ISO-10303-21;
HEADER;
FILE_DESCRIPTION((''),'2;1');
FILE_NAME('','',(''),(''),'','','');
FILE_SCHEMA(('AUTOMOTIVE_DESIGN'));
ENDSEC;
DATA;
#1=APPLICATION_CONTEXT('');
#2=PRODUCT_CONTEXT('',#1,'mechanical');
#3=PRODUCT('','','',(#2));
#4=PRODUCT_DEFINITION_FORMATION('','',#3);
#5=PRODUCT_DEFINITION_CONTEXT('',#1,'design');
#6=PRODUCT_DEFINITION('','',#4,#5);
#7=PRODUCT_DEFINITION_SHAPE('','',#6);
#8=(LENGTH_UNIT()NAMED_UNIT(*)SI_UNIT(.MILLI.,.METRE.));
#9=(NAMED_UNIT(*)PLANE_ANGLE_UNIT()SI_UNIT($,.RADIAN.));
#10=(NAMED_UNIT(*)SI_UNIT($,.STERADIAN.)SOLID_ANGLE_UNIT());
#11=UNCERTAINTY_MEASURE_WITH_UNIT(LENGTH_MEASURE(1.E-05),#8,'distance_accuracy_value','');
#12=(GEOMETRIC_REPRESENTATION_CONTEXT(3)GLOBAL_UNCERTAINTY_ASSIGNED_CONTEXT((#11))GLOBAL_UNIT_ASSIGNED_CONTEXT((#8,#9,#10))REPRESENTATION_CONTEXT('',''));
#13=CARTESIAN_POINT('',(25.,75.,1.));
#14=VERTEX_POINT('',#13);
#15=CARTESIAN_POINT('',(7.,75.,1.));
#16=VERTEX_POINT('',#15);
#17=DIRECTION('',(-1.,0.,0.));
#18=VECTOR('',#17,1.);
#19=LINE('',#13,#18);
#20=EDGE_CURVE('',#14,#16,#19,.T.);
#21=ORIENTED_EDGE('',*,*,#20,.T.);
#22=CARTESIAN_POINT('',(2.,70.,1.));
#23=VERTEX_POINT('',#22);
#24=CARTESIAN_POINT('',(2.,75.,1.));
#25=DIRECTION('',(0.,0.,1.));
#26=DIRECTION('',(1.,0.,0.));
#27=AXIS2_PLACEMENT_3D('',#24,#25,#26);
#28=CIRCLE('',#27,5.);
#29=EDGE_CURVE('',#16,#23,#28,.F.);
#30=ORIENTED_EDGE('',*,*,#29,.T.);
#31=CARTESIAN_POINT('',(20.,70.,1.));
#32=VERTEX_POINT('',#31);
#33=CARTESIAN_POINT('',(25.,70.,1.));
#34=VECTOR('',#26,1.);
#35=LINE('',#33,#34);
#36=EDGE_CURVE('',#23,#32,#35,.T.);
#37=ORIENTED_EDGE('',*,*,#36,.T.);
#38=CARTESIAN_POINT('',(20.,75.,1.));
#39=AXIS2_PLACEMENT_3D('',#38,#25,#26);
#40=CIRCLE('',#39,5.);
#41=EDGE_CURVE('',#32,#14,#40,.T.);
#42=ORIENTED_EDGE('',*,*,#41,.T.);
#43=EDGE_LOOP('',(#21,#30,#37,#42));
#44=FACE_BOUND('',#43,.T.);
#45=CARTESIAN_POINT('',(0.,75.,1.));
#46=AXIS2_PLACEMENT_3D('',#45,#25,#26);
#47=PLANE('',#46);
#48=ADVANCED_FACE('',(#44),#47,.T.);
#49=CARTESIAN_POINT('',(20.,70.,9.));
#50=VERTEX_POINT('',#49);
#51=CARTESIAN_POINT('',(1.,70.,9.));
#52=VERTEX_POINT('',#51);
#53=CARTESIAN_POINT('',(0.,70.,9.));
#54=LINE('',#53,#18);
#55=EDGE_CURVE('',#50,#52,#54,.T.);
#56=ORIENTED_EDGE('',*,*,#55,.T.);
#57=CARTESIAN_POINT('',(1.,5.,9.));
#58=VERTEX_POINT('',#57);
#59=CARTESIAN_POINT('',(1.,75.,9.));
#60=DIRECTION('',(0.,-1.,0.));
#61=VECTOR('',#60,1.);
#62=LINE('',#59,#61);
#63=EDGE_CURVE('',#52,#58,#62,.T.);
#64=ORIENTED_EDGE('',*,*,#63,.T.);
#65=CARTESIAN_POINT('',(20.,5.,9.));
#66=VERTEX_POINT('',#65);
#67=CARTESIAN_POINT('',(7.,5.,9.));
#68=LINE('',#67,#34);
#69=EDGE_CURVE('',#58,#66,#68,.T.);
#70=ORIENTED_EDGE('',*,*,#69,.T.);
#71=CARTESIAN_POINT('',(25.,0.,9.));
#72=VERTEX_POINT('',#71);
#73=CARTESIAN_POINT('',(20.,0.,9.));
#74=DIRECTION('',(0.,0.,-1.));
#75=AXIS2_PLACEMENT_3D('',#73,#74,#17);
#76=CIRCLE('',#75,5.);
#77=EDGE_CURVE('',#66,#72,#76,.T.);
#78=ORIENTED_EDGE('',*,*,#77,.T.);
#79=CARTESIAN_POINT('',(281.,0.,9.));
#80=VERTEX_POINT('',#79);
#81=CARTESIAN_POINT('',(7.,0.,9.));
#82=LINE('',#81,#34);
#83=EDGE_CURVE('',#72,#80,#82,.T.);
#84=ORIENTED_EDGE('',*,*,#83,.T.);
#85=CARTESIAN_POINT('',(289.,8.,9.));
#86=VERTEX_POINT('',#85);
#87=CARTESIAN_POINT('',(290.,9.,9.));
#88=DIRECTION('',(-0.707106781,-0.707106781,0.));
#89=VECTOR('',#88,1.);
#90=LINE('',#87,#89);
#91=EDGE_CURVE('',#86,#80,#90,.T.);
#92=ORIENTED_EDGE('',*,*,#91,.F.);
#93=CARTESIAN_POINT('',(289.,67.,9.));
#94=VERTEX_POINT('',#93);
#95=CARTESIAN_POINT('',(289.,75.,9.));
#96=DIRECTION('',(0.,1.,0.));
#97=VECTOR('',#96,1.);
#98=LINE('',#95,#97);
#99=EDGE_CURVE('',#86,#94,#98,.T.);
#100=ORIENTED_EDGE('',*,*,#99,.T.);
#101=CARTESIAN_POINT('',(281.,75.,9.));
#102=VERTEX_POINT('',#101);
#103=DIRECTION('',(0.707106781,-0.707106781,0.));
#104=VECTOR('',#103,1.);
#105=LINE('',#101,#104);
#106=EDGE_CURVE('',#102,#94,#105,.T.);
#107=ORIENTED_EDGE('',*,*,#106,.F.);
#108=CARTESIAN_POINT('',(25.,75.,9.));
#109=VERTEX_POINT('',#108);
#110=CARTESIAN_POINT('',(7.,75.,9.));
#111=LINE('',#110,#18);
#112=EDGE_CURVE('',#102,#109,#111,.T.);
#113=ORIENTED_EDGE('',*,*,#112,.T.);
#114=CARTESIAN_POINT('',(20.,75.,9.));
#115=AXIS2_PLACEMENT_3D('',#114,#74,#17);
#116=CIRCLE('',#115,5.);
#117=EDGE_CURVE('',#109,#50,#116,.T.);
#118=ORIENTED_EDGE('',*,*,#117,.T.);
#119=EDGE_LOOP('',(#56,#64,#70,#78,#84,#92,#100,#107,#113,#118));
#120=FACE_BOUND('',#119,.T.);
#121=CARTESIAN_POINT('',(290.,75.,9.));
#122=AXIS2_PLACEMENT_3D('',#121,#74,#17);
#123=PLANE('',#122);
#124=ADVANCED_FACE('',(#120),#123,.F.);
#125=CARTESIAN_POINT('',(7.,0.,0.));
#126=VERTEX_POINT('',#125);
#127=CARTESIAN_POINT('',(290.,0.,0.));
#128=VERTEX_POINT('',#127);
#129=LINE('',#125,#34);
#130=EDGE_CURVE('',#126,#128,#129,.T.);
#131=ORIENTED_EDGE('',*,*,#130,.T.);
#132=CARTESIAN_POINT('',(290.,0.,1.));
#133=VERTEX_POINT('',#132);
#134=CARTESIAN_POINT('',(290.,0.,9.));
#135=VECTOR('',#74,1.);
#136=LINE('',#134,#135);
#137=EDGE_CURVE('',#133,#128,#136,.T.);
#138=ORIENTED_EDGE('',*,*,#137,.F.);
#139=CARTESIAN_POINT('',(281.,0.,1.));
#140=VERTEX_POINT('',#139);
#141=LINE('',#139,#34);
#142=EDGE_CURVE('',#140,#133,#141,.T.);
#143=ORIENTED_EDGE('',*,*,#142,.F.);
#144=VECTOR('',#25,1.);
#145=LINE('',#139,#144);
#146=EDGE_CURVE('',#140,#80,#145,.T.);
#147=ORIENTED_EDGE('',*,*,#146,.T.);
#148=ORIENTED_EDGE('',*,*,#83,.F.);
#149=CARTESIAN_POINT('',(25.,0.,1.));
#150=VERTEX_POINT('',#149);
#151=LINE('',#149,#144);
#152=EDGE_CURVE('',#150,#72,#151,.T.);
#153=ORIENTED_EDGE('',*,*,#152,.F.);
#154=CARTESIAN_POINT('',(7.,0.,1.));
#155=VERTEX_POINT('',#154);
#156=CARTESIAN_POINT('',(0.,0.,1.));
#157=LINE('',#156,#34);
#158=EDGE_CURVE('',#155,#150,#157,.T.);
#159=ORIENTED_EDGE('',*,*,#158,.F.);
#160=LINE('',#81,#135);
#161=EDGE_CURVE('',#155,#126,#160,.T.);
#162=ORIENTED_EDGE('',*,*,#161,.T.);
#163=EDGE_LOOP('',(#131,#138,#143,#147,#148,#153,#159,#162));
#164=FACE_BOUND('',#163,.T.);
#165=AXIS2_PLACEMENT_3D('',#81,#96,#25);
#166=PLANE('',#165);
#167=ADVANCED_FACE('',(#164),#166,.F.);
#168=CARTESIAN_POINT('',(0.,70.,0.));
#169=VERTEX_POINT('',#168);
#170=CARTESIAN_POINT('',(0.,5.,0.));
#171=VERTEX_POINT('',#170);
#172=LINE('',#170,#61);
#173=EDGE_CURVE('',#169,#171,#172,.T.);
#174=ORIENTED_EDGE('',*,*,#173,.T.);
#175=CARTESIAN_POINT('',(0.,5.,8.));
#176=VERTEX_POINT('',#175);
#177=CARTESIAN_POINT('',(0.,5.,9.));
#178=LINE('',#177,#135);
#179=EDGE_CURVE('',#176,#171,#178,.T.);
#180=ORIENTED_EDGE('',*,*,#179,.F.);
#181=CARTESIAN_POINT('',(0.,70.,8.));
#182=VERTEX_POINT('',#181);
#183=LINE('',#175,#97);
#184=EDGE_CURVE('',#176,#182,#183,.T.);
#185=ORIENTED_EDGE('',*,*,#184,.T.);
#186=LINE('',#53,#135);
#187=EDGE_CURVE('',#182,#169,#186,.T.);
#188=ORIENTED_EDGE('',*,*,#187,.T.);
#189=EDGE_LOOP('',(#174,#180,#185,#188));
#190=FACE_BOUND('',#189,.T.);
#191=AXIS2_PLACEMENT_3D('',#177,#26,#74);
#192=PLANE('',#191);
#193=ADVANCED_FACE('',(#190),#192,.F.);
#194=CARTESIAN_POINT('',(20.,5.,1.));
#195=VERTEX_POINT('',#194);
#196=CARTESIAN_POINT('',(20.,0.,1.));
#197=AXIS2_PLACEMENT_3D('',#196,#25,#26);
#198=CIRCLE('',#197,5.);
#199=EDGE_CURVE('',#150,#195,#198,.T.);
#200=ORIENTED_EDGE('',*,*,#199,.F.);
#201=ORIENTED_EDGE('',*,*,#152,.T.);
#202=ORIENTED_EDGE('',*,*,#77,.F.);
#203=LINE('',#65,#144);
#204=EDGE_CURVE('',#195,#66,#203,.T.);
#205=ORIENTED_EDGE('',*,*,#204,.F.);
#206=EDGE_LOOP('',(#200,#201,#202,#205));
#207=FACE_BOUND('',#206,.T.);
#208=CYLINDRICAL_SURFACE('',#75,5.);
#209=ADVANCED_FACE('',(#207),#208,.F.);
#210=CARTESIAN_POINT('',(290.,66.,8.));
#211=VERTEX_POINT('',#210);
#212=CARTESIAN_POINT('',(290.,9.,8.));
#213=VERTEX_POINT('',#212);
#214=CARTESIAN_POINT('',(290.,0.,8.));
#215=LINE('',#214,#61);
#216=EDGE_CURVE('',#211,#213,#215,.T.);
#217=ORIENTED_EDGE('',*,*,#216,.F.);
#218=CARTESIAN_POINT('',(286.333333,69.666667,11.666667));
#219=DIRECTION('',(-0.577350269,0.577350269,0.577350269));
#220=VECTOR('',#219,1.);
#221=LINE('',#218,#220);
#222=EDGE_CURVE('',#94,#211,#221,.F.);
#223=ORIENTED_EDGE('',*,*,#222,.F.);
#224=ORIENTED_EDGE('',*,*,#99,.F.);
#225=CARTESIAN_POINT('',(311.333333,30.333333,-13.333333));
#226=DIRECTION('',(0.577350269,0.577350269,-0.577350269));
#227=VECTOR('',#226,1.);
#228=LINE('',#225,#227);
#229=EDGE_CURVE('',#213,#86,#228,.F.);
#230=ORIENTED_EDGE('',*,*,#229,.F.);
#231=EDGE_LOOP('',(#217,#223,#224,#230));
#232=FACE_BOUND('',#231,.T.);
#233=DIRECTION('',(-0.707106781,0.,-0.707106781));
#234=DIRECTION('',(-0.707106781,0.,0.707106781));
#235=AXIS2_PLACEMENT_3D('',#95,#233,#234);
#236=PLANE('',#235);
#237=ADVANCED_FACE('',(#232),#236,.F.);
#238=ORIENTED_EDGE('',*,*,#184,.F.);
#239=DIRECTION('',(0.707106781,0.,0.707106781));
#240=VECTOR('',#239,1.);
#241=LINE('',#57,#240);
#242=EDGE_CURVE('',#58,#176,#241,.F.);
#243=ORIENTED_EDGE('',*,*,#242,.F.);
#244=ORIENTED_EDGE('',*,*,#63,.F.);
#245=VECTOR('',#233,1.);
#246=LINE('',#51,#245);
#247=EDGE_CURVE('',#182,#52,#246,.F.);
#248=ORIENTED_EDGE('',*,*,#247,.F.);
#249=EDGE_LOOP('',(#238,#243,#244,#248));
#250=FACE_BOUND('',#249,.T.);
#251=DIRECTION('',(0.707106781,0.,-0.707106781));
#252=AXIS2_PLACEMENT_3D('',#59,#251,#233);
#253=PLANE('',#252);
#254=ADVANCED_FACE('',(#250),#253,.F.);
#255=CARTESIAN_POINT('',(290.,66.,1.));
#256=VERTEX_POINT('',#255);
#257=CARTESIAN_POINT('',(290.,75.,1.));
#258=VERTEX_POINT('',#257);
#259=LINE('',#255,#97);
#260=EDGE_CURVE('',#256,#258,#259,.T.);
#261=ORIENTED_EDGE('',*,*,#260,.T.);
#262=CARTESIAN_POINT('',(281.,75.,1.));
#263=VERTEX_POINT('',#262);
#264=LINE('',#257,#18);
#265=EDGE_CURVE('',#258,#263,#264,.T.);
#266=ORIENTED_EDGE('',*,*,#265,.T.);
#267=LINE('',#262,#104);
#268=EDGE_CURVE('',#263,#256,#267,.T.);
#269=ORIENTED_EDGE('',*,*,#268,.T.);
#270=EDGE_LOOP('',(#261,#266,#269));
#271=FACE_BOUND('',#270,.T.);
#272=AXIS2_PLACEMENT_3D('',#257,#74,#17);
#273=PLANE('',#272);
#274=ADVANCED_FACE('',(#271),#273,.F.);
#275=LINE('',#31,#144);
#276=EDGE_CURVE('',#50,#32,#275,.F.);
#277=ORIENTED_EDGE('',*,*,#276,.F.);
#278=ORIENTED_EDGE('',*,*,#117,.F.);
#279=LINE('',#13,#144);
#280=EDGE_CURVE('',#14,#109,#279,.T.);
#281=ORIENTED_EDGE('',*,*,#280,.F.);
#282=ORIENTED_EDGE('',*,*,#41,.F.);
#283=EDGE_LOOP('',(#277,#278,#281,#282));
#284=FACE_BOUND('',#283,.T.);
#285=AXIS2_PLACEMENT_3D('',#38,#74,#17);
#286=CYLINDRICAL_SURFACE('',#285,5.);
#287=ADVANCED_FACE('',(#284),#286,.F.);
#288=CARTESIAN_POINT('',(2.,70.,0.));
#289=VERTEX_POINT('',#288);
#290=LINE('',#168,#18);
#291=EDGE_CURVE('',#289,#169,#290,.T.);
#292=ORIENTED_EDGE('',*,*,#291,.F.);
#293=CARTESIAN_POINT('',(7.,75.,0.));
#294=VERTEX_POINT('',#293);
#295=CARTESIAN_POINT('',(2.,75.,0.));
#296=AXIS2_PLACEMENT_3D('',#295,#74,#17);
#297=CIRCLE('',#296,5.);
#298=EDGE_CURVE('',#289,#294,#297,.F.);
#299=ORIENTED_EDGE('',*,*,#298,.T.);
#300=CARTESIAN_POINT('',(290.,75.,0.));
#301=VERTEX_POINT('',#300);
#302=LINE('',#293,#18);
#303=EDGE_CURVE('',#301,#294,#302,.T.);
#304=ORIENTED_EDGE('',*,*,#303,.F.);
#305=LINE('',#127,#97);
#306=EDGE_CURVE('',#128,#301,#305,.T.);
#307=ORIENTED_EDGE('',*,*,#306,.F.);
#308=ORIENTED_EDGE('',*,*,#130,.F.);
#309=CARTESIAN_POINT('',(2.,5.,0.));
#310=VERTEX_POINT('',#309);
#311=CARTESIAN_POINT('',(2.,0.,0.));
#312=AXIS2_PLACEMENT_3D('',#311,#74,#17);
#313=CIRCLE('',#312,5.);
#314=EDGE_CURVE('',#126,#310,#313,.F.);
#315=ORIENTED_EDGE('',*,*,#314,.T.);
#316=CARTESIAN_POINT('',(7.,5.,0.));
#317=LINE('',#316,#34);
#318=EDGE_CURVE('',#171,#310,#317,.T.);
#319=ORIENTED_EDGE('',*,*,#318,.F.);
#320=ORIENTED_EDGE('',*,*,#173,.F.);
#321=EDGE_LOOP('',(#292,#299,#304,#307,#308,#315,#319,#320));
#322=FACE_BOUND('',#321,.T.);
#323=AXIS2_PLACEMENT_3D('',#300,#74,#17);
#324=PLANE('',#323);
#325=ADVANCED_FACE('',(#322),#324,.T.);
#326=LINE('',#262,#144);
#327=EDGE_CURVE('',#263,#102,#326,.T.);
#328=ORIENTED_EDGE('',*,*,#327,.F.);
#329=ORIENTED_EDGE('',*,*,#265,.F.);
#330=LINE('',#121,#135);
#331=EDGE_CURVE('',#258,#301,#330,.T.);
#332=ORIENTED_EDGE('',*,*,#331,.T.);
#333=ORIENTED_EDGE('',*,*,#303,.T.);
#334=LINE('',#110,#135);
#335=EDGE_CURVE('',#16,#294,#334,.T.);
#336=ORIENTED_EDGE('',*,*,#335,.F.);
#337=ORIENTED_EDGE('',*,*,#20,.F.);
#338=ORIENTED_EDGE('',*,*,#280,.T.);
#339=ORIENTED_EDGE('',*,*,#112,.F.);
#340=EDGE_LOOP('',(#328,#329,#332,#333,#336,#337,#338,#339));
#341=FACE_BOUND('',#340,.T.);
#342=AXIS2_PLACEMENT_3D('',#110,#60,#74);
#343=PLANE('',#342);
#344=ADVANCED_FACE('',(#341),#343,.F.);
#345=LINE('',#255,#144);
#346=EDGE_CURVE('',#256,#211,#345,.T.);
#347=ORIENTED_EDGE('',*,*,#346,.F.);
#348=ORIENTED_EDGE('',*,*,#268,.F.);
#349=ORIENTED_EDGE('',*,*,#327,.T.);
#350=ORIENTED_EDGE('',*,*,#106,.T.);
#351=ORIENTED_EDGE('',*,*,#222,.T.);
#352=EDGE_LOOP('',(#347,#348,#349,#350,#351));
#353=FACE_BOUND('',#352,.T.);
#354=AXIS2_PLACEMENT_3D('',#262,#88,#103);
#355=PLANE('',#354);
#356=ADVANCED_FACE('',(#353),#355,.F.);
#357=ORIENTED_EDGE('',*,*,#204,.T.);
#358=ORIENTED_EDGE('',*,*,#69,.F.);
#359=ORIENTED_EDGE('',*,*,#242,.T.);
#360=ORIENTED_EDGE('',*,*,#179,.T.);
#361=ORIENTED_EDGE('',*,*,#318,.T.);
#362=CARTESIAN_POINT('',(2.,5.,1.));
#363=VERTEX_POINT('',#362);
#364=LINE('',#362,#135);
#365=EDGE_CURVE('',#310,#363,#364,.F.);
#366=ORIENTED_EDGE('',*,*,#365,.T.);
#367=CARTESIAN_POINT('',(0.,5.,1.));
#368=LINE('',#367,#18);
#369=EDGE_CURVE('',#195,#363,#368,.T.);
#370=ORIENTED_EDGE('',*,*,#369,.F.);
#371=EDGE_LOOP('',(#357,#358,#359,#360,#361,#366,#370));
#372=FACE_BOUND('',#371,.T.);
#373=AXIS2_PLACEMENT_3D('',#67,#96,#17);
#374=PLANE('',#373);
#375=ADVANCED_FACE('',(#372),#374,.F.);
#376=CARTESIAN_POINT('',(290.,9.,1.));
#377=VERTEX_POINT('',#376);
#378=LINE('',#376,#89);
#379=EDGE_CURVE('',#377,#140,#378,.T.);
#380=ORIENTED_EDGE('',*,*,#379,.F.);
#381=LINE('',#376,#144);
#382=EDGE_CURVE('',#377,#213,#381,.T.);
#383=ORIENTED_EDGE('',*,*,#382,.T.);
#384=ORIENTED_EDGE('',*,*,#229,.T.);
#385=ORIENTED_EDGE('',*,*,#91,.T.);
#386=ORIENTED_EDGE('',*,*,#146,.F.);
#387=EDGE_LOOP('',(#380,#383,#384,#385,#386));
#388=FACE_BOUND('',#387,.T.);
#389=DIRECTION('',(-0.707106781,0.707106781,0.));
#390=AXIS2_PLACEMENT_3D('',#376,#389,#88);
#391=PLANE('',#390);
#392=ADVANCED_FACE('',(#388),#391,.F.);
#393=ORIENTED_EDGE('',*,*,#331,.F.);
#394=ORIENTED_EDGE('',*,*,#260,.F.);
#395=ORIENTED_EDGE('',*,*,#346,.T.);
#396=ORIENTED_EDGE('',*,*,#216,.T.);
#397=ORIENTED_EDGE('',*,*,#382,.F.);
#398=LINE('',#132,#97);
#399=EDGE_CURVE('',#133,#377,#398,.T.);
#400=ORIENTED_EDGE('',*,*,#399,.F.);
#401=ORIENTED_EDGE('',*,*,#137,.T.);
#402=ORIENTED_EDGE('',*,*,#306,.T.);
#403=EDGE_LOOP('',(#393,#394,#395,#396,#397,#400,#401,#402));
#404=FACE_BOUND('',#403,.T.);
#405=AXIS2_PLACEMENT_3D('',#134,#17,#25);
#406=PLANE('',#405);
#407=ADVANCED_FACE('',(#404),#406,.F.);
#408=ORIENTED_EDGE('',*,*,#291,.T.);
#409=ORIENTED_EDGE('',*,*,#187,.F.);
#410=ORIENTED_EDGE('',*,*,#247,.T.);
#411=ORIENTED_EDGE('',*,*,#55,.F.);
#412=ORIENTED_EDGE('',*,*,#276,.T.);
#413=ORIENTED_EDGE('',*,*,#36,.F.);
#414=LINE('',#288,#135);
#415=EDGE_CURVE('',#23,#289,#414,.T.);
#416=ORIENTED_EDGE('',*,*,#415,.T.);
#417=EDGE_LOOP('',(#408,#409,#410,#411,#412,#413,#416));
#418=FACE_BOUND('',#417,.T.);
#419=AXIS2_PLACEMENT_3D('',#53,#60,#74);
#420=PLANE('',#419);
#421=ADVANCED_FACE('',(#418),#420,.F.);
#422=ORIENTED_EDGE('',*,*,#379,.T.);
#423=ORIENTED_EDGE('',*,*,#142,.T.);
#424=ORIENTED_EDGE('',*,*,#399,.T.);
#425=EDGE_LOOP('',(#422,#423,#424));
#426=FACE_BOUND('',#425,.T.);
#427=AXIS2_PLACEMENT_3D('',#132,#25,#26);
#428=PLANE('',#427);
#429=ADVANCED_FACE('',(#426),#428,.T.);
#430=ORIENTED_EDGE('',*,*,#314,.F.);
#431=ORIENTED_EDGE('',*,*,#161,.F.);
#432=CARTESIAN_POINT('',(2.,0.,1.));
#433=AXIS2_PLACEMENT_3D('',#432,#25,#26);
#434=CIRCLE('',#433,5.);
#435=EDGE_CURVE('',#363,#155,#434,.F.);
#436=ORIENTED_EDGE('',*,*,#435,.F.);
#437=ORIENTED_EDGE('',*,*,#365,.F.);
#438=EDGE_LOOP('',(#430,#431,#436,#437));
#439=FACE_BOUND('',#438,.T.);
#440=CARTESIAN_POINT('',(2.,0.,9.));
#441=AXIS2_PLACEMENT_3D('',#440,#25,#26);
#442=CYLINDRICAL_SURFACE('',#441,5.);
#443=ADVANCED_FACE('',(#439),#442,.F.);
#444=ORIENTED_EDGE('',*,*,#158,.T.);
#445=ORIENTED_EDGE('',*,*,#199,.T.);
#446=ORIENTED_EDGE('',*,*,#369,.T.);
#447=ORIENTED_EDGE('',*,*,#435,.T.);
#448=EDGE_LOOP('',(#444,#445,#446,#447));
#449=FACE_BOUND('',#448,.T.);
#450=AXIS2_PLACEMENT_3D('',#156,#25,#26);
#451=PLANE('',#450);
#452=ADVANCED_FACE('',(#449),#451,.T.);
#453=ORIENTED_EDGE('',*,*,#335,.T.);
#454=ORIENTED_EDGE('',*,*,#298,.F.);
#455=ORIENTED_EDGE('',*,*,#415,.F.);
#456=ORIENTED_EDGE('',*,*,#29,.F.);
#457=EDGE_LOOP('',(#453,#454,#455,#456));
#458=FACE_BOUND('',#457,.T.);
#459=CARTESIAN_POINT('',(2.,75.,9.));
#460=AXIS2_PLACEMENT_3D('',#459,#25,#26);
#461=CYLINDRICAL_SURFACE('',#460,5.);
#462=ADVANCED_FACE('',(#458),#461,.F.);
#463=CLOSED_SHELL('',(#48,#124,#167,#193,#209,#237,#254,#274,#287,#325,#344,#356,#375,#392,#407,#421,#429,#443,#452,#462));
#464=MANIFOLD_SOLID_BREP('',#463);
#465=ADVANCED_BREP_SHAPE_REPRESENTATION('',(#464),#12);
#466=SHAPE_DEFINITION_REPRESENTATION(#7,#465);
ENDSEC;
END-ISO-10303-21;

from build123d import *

# Parameters (mm, degrees)
BASE_EXTRUDE_DEPTH = 9
SKETCH2_W          = 25
SKETCH2_H          = 5
CUT_EXTRUDE1_DEPTH = 8
CHAMFER1_SIZE      = 1
FILLET1_R          = 5


with BuildPart() as part:
    # Sketch1 → Base-Extrude (new body)
    with BuildSketch(Plane.XY):
        Polygon((7, 0), (7, 5), (0, 5), (0, 70), (7, 70), (7, 75), (290, 75), (290, 0), align=None)
    extrude(amount=BASE_EXTRUDE_DEPTH)

    # Sketch2 → Cut-Extrude1 (cut)
    with BuildSketch(Plane.XY.offset(9)):
        Polygon((281, 75), (290, 66), (290, 75), align=None)
        Polygon((290, 9), (281, 0), (290, 0), align=None)
        with Locations((12.5, 72.5)):
            Rectangle(SKETCH2_W, SKETCH2_H)
        with Locations((12.5, 2.5)):
            Rectangle(SKETCH2_W, SKETCH2_H)
    extrude(amount=-CUT_EXTRUDE1_DEPTH, mode=Mode.SUBTRACT)

    # Chamfer1
    chamfer1_edges = [part.edges().sort_by_distance(p)[0] for p in [
        (0, 37.5, 9),
        (290, 37.5, 9),
    ]]
    chamfer(chamfer1_edges, length=CHAMFER1_SIZE)

    # Fillet1
    fillet1_edges = [part.edges().sort_by_distance(p)[0] for p in [
        (7, 5, 0.5),
        (25, 5, 5),
        (7, 70, 0.5),
        (25, 70, 5),
    ]]
    fillet(fillet1_edges, radius=FILLET1_R - 0.0001)  # a hair under: the kernel refuses the full size


solid = part.part
